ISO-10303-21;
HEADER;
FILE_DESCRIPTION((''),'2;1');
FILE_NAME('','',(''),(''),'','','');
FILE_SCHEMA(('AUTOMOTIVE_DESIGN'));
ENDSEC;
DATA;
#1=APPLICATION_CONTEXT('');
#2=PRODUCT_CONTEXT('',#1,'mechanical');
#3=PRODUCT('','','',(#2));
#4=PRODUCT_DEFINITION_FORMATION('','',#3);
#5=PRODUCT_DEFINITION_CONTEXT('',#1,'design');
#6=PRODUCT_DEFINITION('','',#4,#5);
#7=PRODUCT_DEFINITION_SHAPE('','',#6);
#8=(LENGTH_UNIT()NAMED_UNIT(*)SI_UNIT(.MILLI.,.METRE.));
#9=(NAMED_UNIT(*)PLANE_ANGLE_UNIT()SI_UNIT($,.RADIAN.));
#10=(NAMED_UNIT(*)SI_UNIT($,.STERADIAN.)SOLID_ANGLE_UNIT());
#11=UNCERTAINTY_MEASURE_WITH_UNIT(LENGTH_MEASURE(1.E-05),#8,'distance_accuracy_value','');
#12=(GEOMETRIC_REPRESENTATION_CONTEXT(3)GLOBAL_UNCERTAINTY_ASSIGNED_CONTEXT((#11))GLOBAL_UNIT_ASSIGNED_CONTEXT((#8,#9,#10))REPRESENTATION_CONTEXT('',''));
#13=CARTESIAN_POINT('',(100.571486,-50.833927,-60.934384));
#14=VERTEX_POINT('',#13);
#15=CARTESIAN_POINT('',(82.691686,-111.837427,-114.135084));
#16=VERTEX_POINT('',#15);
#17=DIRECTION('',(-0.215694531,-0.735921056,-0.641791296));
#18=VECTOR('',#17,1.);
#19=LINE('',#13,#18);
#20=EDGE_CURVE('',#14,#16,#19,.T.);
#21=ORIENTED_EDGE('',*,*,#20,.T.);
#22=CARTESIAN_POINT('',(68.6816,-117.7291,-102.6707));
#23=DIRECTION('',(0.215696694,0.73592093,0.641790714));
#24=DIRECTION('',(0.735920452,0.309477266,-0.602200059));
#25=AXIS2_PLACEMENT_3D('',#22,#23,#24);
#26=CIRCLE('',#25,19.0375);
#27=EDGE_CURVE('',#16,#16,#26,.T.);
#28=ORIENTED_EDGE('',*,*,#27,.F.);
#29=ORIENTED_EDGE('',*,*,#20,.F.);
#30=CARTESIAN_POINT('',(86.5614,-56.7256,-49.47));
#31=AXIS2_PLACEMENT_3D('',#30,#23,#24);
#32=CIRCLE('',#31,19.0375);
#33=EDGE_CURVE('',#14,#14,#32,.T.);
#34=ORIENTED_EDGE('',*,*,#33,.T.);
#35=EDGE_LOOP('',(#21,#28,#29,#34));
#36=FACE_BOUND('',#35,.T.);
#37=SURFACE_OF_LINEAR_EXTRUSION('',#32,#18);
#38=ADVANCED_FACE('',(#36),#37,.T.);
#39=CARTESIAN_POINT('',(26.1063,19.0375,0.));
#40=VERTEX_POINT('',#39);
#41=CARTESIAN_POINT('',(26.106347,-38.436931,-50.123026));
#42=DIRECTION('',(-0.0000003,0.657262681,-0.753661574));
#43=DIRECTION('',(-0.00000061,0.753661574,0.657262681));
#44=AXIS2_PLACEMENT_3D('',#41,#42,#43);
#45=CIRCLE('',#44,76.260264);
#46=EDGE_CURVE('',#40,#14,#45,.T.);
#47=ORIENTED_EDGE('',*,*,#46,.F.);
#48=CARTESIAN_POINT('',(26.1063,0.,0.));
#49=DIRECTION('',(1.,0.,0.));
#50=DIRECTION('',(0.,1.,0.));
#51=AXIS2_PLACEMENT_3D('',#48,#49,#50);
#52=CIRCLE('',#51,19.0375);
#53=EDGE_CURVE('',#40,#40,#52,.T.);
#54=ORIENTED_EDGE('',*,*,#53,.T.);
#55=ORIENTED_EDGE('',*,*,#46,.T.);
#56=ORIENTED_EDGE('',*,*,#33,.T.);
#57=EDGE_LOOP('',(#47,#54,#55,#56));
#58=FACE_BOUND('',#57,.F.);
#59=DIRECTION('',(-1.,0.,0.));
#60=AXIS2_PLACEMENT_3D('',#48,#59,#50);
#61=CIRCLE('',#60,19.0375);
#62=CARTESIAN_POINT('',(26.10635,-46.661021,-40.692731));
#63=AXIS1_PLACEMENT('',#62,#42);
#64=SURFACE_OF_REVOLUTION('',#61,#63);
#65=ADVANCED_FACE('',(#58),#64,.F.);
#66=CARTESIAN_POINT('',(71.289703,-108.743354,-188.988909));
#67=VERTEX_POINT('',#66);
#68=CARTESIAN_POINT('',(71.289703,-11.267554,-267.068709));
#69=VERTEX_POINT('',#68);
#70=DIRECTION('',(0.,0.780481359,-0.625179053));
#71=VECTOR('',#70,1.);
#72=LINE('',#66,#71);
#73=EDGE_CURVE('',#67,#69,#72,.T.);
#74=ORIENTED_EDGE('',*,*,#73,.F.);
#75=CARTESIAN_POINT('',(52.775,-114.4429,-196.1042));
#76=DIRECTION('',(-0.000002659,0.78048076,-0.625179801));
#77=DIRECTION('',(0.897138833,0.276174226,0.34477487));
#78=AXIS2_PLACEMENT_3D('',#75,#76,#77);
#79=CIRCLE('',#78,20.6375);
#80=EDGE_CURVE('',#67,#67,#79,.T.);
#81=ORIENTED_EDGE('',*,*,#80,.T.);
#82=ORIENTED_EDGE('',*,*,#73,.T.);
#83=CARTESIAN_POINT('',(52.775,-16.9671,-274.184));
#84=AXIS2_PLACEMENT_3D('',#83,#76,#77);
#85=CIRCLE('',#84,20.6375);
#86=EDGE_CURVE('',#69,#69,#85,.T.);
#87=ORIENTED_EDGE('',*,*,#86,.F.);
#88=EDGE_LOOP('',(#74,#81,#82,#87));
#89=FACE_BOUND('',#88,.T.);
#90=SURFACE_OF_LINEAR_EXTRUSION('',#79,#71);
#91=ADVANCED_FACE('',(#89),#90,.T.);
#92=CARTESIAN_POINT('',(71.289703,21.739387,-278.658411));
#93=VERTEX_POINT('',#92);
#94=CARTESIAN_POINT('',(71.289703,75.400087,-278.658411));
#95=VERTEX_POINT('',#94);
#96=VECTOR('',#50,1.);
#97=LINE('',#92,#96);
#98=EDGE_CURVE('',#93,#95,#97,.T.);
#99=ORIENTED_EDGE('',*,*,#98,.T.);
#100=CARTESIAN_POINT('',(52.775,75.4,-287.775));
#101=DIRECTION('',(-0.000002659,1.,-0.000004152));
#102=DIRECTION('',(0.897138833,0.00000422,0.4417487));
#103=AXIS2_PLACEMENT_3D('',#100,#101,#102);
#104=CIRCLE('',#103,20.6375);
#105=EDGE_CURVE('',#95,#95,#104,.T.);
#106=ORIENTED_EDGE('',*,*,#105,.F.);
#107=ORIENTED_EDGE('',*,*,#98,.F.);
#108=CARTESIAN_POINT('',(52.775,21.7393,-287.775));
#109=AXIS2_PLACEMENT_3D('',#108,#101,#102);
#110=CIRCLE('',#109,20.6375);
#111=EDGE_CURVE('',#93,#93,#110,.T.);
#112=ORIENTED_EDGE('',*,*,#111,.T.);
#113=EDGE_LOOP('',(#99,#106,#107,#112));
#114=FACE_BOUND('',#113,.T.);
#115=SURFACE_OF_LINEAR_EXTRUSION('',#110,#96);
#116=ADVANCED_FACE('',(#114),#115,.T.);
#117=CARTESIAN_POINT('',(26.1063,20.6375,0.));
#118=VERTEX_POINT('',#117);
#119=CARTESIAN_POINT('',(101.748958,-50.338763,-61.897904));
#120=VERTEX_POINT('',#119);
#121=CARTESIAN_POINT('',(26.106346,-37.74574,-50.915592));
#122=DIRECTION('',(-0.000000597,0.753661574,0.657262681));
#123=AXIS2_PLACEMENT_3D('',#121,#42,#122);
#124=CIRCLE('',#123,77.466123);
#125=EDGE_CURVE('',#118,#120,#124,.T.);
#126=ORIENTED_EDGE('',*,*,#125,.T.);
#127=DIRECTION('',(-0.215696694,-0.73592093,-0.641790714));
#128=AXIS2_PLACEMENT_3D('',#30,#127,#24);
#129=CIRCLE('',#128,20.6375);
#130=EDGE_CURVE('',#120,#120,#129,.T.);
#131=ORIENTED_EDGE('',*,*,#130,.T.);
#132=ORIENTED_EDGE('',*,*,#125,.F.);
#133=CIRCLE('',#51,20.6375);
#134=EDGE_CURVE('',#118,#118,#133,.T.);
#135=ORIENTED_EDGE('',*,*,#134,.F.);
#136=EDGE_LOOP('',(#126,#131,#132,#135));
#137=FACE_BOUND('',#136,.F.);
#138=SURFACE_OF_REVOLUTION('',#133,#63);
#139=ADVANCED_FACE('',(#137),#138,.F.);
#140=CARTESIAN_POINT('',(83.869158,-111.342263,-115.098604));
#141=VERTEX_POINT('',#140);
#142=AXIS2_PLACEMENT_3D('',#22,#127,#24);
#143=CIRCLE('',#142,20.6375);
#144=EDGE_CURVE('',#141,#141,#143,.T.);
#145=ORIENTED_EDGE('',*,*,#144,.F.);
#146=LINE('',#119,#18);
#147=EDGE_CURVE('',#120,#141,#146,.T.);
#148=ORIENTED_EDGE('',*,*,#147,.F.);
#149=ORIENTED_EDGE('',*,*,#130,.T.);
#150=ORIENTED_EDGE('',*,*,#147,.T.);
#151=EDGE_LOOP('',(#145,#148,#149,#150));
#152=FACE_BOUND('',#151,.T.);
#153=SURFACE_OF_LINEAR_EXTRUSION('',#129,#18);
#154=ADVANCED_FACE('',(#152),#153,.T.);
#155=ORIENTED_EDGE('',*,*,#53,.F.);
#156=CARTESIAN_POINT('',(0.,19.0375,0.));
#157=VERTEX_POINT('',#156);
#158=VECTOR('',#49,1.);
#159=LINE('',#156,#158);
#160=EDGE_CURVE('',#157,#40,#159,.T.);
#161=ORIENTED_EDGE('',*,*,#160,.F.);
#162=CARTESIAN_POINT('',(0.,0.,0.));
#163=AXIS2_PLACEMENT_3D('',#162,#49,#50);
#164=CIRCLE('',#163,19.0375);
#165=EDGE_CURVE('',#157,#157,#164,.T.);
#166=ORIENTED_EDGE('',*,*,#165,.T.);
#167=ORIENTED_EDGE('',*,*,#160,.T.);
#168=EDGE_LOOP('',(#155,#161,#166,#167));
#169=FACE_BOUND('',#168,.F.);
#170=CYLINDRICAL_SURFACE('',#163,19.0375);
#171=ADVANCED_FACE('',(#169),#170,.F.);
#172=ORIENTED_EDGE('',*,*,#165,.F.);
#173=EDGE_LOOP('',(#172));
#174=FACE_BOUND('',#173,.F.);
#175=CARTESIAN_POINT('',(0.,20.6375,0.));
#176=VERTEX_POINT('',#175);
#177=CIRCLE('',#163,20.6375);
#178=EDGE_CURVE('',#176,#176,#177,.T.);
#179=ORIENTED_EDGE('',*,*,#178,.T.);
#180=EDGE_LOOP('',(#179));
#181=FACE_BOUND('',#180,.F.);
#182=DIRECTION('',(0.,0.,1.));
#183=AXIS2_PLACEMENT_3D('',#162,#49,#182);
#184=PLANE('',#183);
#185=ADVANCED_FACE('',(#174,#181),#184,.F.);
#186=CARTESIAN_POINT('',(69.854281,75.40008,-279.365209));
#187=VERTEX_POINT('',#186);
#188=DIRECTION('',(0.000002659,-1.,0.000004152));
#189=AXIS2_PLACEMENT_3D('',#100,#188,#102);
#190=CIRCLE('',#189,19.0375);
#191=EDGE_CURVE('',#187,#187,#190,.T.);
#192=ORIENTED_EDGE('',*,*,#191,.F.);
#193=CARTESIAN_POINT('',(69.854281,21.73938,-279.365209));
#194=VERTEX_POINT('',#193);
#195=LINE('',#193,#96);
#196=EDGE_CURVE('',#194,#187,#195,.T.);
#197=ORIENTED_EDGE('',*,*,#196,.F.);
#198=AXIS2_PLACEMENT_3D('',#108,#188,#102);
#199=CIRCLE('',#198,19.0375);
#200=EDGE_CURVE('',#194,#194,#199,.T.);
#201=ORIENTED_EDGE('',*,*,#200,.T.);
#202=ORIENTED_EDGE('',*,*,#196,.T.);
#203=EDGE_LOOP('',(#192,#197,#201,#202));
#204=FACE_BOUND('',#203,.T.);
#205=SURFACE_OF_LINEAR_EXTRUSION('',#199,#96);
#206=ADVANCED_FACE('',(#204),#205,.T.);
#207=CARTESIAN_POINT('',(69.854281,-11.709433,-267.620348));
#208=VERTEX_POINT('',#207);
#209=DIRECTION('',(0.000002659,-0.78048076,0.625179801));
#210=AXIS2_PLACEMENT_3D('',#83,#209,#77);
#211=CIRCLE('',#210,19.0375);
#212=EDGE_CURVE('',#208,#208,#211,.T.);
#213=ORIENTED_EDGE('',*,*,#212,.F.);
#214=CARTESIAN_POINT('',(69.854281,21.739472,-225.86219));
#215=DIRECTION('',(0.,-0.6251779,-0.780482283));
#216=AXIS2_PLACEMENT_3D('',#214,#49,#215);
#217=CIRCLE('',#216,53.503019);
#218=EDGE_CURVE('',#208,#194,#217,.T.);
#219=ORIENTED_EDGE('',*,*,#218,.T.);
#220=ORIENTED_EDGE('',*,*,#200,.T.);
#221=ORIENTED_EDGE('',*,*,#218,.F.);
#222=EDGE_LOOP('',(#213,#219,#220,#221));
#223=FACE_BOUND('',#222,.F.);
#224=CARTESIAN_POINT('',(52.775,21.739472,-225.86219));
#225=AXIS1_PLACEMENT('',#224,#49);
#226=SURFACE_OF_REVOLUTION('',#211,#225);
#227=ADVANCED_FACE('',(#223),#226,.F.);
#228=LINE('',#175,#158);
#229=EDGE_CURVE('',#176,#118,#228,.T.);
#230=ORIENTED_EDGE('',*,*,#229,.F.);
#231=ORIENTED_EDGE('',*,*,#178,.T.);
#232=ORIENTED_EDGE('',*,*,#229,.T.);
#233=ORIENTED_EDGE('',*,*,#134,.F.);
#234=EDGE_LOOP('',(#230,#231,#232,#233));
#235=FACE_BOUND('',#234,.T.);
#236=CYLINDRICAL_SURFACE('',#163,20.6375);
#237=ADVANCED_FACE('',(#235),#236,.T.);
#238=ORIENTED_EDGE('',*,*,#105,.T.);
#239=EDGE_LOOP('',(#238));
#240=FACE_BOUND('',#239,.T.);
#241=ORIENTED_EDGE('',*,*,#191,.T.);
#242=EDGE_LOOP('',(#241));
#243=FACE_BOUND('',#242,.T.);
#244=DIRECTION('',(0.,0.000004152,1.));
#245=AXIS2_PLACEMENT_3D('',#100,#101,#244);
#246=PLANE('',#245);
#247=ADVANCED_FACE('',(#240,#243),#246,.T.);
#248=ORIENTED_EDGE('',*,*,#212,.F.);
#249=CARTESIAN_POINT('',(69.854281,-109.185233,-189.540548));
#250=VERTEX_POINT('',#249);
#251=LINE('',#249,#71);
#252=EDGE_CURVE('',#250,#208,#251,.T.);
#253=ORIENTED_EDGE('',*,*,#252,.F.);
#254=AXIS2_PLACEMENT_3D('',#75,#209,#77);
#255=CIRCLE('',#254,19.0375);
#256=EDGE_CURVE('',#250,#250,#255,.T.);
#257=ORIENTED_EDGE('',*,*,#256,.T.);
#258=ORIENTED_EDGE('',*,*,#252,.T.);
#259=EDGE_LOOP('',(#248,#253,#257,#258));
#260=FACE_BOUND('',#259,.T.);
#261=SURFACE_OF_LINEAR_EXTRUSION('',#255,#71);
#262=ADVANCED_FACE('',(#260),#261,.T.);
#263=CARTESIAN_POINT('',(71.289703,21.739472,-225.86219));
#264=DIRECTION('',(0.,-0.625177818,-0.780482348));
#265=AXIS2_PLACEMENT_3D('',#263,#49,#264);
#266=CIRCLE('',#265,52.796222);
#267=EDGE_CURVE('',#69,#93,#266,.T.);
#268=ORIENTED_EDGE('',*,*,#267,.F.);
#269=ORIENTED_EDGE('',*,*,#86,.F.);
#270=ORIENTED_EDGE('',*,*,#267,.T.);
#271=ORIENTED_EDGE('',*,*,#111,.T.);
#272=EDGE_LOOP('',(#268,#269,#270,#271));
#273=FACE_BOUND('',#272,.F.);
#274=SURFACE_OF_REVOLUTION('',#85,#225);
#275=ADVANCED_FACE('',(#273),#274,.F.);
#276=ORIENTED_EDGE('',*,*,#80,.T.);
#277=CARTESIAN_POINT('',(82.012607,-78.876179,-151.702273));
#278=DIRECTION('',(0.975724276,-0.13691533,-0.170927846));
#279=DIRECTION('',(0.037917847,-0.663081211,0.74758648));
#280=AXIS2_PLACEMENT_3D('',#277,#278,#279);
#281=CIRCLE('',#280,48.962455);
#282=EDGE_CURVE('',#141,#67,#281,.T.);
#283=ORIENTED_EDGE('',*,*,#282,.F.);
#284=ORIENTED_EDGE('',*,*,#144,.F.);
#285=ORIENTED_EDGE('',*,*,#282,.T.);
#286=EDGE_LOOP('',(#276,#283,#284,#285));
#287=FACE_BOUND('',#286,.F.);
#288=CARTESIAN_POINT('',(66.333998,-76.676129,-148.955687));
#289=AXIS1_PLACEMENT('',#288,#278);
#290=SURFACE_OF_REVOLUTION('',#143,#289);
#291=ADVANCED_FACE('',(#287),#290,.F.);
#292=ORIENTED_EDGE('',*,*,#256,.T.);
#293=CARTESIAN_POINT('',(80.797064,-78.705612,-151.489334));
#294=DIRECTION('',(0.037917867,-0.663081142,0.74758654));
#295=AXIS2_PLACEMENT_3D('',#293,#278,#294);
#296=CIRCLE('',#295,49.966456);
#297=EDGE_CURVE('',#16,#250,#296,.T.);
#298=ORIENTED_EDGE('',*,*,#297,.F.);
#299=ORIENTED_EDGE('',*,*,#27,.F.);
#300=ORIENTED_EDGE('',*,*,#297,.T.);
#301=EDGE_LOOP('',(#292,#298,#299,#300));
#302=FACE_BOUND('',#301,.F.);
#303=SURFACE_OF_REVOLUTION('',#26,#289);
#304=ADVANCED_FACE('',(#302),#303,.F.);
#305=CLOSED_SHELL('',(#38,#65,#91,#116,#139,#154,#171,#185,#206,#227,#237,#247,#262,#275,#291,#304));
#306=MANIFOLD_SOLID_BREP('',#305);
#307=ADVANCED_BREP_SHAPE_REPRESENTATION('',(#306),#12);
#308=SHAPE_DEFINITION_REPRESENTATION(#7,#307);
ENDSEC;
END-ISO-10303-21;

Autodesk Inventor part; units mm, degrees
sketch "Sketch1" plane through (0, 0, 0) normal (1, 0, 0) x (0, 1, 0)
  line L0 (0, 0) -> (-172, -150)
  line L1 (-172, -150) -> (0, -287.775)
  line L2 (0, -287.775) -> (75.4, -287.775)
  line L3 (0, 0) -> (0, -103.1875) construction
  line L4 (0, -103.1875) -> (-172, -52.775) construction
  line L5 (-172, -52.775) -> (0, -52.775) construction
  line L6 (0, -52.775) -> (75.4, -52.775) construction
  dimension "d0" = 287.775
  dimension "d4" = 150
  dimension "d5" = 75.4
  dimension "d6" = 103.1875
  dimension "d7" = 52.775
  dimension "d8" = 52.775
  dimension "d19" = 172
  dimension "d20" = 0
ref_plane "Work Plane1" through (103.1875, 0, 0) normal (1, 0, 0) x (0, 1, 0)
ref_plane "Work Plane2" through (52.775, 0, 0) normal (1, 0, 0) x (0, 1, 0)
ref_plane "Work Plane3" through (52.775, 0, 0) normal (1, 0, 0) x (0, 1, 0)
sketch "Sketch2" plane through (103.1875, 0, 0) normal (1, 0, 0) x (0, 1, 0)
  point P0 (0, 0)
  point P1 (0, 0)
sketch "Sketch3" plane through (52.775, 0, 0) normal (1, 0, 0) x (0, 1, 0)
  point P0 (0, 0)
  point P1 (-172, -150)
  point P2 (0, -287.775)
sketch "Sketch4" plane through (52.775, 0, 0) normal (1, 0, 0) x (0, 1, 0)
  point P0 (0, 0)
  point P1 (75.4, -287.775)
  point P2 (0, -287.775)
sketch "Sketch5" plane through (0, 0, 0) normal (1, 0, 0) x (0, 1, 0)
  circle A0 centre (0, 0) radius 20.6375
  circle A1 centre (0, 0) radius 19.0375
  dimension "d15" = 1.6
  dimension "d17" = 41.275
sketch3d "3D Sketch1"
  line L0 (0, 0, 0) -> (26.1063, 0, 0)
  arc A0 (26.1063, 0, 0) -> (86.5614, -56.7256, -49.47) centre (26.1063, -46.6611, -40.6928) ccw
  line L1 (86.5614, -56.7256, -49.47) -> (68.6816, -117.7291, -102.6707)
  arc A1 (68.6816, -117.7291, -102.6707) -> (52.775, -114.4429, -196.1042) centre (66.334, -76.6761, -148.9557) ccw
  line L2 (52.775, -114.4429, -196.1042) -> (52.775, -16.9671, -274.184)
  arc A2 (52.775, -16.9671, -274.184) -> (52.775, 21.7393, -287.775) centre (52.775, 21.7393, -225.8625) ccw
  line L3 (52.775, 21.7393, -287.775) -> (52.775, 75.4, -287.775)
  dimension "d12" = 61.9125
  dimension "d13" = 61.9125
  dimension "d14" = 61.9125
sweep "Sweep1" add profiles "Sketch5" path "3D Sketch1"
equation "\"d8\" = d7"
equation "\"d13\" = d12"
equation "\"d14\" = d12"
equation "\"d9\" = d6"
equation "\"d10\" = d8"
equation "\"d11\" = d7"
properties part number "exhaust header right pipe 7" material "Steel"
